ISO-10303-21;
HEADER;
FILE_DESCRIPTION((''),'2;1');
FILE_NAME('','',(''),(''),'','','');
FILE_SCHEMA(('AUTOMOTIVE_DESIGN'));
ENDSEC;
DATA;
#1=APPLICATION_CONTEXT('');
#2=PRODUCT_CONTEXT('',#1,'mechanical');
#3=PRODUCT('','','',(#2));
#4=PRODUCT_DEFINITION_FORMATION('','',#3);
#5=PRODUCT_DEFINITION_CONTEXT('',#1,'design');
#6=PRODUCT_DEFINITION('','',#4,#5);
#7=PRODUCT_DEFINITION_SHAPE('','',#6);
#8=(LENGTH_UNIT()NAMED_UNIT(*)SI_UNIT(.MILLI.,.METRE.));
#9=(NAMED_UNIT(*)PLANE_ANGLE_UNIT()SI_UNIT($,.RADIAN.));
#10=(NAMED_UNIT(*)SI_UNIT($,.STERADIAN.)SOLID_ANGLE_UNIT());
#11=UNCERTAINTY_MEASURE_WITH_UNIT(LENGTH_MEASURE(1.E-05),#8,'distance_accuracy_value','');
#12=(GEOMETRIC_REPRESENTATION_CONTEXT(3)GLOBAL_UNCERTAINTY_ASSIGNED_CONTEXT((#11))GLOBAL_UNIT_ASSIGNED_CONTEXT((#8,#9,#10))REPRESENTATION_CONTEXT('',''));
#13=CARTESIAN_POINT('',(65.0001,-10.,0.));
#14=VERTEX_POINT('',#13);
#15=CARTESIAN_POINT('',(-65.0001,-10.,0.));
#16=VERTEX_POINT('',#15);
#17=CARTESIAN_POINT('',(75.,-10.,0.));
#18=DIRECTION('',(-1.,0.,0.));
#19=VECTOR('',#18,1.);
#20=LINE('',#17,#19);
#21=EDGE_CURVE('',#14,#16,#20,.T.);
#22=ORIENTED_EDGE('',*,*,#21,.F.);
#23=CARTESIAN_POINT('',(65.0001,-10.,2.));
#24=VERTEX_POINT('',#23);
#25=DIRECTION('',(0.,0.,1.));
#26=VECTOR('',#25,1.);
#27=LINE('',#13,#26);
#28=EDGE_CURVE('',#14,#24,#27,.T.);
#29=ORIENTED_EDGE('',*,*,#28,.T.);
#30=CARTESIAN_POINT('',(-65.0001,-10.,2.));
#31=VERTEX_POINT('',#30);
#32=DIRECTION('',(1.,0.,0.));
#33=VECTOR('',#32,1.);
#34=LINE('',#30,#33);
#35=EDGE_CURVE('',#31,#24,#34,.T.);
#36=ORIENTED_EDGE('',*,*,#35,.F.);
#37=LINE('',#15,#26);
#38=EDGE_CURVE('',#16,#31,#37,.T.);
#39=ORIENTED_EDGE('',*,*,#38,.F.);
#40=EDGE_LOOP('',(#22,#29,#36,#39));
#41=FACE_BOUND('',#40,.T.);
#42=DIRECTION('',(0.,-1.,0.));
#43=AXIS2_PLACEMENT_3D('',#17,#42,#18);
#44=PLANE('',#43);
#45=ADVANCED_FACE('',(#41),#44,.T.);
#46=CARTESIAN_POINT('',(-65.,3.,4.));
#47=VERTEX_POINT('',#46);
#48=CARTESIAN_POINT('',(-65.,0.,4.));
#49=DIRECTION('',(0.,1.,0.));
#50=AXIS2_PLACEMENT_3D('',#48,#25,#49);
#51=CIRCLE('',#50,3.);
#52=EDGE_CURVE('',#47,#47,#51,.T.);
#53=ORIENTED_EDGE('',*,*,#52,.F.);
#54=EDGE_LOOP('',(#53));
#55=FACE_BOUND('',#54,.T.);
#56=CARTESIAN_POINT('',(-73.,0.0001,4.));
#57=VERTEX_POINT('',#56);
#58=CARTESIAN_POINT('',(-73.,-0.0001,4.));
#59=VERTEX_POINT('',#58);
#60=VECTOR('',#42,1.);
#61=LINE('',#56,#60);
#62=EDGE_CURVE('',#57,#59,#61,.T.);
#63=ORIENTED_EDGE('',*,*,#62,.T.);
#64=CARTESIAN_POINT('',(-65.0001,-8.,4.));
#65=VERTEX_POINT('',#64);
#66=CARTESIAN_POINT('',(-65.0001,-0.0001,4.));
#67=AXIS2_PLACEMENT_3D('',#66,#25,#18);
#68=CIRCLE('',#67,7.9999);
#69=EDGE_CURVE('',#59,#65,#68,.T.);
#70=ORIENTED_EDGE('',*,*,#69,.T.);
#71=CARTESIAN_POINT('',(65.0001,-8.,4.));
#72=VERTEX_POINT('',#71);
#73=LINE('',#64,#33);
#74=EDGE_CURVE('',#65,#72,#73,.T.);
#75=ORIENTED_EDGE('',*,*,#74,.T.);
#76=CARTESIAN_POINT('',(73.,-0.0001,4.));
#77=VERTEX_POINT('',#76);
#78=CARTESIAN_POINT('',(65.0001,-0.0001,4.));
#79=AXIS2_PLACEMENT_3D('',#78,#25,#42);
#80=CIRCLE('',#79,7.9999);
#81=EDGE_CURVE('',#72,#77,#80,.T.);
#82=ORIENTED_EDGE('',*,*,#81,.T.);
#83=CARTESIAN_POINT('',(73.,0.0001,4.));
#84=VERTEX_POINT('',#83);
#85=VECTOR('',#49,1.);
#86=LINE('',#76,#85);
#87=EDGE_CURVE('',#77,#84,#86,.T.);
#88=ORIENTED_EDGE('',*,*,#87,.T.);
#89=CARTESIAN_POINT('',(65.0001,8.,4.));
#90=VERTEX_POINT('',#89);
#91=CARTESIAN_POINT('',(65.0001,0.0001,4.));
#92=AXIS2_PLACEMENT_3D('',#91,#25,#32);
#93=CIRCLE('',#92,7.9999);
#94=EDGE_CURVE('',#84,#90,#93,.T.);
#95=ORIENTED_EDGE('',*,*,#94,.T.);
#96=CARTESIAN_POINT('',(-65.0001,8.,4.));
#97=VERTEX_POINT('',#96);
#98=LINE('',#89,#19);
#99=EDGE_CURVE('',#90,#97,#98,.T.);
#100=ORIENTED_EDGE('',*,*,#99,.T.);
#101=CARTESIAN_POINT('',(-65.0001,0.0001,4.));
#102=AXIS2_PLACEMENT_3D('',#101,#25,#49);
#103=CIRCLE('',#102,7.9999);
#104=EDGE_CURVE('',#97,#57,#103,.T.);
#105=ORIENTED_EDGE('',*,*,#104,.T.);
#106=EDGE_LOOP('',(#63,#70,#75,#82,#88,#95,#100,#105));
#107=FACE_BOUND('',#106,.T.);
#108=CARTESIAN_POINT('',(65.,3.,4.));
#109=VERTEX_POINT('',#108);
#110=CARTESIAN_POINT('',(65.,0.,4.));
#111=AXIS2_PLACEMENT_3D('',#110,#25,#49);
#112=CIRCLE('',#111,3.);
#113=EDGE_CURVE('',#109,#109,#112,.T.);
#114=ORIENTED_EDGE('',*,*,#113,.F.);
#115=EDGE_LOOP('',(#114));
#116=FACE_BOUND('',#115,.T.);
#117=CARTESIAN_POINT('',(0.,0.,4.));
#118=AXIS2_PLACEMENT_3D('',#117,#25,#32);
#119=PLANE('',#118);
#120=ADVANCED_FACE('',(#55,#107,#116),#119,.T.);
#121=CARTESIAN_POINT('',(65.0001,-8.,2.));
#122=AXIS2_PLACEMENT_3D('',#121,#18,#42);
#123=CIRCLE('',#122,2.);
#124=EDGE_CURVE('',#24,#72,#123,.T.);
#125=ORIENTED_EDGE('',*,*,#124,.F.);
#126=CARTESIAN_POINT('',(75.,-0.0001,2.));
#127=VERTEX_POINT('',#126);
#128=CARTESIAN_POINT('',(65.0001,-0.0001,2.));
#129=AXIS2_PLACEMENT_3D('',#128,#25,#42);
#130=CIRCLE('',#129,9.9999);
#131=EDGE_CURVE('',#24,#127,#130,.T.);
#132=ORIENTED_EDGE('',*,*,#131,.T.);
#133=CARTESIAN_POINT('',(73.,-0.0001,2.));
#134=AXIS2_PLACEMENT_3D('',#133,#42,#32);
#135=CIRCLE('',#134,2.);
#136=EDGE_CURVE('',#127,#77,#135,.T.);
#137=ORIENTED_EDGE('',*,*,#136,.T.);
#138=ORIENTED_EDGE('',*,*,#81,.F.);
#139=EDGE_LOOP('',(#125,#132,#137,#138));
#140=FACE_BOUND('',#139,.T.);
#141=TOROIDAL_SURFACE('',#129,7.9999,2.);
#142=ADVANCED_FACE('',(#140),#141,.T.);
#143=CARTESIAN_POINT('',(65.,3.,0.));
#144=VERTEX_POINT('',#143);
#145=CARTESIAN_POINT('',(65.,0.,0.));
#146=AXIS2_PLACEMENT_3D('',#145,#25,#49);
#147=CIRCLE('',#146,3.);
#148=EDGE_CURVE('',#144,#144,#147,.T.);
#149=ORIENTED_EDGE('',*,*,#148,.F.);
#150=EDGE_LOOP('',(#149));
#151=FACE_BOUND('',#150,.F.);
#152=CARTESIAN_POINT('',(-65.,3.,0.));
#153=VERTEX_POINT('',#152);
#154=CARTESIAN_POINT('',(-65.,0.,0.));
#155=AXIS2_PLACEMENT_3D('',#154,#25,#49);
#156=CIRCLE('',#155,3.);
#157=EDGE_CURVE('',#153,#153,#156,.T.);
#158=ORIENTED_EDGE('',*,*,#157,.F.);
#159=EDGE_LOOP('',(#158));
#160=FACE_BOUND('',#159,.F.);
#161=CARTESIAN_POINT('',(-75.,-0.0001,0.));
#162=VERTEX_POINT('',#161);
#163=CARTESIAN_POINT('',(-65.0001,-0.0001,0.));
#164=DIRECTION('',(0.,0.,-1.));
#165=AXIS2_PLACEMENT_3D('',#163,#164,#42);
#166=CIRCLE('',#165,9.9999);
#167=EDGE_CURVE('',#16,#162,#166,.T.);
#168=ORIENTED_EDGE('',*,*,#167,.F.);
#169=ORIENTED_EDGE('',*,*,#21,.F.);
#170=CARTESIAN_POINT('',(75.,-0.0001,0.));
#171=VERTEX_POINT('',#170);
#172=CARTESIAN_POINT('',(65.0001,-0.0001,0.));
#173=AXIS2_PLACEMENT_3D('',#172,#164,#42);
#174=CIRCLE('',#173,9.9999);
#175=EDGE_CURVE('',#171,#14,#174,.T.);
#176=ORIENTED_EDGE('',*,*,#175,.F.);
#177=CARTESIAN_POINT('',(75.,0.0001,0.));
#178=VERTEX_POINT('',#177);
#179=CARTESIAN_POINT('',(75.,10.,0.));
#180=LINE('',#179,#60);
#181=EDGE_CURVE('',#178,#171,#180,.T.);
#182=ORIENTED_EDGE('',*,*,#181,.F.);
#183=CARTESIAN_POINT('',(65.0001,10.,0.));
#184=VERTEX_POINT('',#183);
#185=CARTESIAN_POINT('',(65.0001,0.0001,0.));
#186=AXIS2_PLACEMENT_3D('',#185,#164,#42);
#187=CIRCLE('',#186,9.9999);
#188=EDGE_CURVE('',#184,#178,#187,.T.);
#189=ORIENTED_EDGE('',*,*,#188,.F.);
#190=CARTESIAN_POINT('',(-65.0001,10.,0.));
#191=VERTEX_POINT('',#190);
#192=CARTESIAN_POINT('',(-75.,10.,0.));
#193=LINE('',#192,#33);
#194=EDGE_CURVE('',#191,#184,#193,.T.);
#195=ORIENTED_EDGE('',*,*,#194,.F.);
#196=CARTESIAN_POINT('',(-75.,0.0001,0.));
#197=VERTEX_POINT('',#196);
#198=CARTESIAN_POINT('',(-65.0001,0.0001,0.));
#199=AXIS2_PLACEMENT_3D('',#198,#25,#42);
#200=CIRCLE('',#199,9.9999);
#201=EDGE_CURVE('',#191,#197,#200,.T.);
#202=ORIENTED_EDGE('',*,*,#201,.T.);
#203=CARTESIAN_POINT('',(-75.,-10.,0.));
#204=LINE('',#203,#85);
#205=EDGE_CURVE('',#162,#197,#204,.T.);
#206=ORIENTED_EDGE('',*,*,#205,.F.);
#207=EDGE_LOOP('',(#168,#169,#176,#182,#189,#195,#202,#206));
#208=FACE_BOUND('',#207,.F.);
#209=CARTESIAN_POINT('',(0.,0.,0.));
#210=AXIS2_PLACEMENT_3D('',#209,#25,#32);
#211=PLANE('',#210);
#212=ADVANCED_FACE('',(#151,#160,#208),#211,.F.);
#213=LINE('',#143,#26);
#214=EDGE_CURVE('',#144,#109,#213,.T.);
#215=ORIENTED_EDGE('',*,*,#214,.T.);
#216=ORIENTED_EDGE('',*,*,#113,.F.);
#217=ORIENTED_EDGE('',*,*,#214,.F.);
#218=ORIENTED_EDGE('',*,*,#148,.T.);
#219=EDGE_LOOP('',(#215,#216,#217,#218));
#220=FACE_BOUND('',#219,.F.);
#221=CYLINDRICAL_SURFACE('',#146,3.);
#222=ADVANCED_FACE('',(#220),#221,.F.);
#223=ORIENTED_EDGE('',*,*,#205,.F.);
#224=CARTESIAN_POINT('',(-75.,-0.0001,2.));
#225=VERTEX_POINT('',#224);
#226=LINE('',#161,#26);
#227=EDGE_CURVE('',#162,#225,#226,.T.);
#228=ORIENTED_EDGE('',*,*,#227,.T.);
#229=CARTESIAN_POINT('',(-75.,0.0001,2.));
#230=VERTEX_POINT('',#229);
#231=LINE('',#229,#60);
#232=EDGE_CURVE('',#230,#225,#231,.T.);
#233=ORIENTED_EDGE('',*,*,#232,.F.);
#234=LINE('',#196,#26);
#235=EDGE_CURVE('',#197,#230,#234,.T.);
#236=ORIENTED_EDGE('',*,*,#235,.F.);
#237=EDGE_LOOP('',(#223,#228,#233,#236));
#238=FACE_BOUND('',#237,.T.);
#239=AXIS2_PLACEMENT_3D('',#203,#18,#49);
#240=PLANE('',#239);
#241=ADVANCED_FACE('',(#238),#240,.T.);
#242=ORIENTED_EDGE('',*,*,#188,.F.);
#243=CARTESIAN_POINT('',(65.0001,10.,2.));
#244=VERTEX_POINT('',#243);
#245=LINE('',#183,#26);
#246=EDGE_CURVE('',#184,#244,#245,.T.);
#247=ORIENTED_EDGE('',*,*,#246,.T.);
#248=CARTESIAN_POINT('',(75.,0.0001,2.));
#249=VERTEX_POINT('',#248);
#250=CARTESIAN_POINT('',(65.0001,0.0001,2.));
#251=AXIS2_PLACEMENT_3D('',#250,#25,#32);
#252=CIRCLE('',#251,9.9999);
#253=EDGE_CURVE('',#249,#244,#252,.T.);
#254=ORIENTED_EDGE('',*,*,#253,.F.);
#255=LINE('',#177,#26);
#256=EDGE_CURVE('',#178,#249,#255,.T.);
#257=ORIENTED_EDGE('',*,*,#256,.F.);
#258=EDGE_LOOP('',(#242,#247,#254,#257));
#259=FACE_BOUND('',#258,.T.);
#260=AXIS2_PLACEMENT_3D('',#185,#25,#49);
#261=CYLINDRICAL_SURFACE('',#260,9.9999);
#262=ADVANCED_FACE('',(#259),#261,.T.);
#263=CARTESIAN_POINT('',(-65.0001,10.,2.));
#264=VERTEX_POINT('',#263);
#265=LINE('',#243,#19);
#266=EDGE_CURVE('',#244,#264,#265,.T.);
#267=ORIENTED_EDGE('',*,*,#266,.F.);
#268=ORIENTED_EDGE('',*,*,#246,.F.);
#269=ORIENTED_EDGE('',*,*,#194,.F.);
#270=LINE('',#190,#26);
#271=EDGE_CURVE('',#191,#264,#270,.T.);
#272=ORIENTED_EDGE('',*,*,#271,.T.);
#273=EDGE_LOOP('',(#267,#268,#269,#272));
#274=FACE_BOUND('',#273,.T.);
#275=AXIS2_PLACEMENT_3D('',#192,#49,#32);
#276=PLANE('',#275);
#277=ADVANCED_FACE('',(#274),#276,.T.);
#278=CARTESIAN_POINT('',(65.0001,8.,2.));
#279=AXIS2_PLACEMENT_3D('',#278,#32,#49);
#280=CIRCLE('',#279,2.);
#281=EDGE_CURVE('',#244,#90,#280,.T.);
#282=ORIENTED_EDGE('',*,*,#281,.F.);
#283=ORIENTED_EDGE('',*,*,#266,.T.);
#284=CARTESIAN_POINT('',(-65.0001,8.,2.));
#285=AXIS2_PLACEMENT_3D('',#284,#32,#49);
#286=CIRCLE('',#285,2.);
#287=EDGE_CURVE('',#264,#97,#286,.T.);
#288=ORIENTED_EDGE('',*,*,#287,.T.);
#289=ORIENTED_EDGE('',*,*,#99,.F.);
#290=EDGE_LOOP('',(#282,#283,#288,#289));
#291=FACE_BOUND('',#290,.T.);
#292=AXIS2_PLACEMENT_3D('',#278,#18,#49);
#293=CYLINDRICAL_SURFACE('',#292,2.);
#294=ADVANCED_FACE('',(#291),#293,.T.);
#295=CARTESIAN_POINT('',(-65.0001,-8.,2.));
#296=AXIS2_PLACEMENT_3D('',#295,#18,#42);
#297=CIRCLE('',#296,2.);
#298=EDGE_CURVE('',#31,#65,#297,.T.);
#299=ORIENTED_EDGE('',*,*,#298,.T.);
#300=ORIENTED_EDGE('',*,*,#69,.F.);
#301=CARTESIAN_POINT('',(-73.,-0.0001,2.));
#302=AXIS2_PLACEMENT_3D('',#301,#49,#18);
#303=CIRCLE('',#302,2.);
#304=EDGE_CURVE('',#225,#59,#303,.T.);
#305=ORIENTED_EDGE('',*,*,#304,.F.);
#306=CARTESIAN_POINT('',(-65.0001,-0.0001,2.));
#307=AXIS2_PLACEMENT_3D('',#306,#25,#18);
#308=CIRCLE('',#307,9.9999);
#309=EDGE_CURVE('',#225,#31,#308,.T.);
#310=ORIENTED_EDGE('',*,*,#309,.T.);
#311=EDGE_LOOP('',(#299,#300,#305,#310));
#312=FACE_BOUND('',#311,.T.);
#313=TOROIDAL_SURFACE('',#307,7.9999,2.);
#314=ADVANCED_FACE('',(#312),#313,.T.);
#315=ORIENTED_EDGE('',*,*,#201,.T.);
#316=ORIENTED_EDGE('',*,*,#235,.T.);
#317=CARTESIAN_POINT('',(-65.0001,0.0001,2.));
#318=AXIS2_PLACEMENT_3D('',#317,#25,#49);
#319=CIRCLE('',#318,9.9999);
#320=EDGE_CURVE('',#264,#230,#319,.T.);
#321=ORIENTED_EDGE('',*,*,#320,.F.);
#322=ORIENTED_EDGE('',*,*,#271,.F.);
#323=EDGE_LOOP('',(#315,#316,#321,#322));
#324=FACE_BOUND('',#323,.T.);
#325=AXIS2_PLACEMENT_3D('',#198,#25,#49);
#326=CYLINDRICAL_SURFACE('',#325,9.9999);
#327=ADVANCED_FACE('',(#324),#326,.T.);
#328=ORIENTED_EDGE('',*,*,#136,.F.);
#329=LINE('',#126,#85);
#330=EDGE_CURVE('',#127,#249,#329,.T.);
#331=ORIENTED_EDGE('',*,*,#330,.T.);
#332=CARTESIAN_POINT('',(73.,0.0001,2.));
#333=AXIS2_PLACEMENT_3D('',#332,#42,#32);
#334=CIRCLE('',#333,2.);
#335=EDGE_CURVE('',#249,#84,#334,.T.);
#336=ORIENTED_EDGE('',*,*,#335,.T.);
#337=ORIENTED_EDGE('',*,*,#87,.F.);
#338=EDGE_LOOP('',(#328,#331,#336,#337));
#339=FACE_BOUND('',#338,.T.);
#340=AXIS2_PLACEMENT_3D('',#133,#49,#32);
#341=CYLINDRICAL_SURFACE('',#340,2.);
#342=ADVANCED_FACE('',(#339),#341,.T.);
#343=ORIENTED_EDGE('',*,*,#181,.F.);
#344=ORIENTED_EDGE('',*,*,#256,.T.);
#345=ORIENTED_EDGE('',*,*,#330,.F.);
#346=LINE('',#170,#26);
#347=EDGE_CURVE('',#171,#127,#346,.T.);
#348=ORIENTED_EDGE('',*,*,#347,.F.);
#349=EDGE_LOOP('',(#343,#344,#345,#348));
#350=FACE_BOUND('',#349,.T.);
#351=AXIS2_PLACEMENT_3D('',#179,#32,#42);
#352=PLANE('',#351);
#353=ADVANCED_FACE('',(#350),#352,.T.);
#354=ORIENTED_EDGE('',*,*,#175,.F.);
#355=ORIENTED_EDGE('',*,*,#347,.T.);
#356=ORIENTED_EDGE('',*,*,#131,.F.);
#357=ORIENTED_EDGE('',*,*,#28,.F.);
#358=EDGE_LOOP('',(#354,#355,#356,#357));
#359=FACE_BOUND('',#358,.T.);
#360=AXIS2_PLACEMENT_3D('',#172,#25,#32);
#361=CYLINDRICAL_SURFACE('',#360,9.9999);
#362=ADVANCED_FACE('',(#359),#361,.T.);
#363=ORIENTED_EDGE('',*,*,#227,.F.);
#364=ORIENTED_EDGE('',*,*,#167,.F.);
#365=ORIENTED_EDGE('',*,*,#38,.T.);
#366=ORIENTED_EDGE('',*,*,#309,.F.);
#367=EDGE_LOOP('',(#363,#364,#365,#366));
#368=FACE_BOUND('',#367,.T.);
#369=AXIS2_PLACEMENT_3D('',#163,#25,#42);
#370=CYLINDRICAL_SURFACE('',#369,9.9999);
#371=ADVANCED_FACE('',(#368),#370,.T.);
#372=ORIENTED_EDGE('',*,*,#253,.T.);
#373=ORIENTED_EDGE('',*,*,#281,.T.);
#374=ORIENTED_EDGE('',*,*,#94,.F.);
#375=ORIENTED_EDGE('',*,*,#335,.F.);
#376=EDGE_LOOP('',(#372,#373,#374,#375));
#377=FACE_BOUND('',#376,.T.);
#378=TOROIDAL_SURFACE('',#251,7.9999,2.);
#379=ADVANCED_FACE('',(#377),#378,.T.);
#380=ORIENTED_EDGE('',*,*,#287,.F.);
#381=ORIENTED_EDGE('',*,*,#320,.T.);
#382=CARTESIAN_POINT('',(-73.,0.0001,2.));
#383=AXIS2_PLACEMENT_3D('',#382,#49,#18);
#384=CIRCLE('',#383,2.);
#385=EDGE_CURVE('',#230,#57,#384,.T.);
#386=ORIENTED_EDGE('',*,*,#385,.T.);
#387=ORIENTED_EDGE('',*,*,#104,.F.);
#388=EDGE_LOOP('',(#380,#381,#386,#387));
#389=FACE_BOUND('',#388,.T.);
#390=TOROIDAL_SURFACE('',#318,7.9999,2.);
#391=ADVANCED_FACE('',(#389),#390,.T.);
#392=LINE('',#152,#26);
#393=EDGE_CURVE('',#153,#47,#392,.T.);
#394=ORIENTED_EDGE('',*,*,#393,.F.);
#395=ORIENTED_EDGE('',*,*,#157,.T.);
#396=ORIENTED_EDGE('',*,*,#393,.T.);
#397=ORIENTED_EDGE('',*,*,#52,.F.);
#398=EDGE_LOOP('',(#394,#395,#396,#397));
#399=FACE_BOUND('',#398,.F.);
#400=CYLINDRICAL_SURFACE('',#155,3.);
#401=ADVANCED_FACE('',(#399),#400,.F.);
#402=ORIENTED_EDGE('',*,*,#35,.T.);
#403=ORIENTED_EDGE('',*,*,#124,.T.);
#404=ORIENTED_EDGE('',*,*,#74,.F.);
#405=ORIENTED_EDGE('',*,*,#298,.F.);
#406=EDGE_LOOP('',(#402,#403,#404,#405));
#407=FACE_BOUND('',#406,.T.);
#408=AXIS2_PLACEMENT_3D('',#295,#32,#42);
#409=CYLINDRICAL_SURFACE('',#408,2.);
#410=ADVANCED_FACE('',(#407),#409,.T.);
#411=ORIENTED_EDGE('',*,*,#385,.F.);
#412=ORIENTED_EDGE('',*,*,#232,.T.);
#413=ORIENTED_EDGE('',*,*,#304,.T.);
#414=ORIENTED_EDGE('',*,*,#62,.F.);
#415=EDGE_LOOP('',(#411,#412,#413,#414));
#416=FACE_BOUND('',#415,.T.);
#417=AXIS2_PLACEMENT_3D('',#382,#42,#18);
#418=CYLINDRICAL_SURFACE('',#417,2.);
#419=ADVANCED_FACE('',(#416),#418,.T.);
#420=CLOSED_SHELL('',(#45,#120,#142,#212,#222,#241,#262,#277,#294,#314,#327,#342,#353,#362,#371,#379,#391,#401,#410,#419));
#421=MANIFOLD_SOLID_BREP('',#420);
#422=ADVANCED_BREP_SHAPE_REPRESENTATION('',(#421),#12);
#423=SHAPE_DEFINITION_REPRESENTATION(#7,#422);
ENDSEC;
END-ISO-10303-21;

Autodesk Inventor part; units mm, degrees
ref_plane "YZ Plane" through (0, 0, 0) normal (1, 0, 0) x (0, 1, 0)
ref_plane "XZ Plane" through (0, 0, 0) normal (0, 1, 0) x (-1, 0, 0)
ref_plane "XY Plane" through (0, 0, 0) normal (0, 0, 1) x (1, 0, 0)
sketch "スケッチ1" plane through (0, 0, 0) normal (0, 0, 1) x (1, 0, 0)
  line L0 (-75, 10) -> (75, 10)
  line L1 (75, 10) -> (75, -10)
  line L2 (75, -10) -> (-75, -10)
  line L3 (-75, -10) -> (-75, 10)
  line L4 (-75, 10) -> (75, -10) construction
  line L5 (75, 10) -> (-75, -10) construction
  point P0 (0, 0)
  dimension "d0" = 150
  dimension "d1" = 20
extrude "押し出し1" add sketch "スケッチ1" along normal blind 4
fillet "フィレット1" radius 10 4 edges at (75, 10, 2) (75, -10, 2) (-75, 10, 2) (-75, -10, 2)
fillet "フィレット2" radius 2 4 edges at (-72.0711, 7.0711, 4) (0, -10, 4) (72.0711, 7.0711, 4) (0, 10, 4)
sketch "スケッチ2" plane through (0, 0, 0) normal (0, 0, -1) x (-1, 0, 0)
  arc A0 (-65, 10) -> (-65, -10) centre (-65, 0) ccw projected
  arc A1 (65, -10) -> (65, 10) centre (65, 0) ccw projected
  point P0 (0, 0)
  dimension "d6" = 0
  dimension "d7" = 0
hole "穴1" at (65, 0, 0) at (-65, 0, 0) direction (0, 0, 1) diameter 6 end through all
properties part number "joy_mount_I"
